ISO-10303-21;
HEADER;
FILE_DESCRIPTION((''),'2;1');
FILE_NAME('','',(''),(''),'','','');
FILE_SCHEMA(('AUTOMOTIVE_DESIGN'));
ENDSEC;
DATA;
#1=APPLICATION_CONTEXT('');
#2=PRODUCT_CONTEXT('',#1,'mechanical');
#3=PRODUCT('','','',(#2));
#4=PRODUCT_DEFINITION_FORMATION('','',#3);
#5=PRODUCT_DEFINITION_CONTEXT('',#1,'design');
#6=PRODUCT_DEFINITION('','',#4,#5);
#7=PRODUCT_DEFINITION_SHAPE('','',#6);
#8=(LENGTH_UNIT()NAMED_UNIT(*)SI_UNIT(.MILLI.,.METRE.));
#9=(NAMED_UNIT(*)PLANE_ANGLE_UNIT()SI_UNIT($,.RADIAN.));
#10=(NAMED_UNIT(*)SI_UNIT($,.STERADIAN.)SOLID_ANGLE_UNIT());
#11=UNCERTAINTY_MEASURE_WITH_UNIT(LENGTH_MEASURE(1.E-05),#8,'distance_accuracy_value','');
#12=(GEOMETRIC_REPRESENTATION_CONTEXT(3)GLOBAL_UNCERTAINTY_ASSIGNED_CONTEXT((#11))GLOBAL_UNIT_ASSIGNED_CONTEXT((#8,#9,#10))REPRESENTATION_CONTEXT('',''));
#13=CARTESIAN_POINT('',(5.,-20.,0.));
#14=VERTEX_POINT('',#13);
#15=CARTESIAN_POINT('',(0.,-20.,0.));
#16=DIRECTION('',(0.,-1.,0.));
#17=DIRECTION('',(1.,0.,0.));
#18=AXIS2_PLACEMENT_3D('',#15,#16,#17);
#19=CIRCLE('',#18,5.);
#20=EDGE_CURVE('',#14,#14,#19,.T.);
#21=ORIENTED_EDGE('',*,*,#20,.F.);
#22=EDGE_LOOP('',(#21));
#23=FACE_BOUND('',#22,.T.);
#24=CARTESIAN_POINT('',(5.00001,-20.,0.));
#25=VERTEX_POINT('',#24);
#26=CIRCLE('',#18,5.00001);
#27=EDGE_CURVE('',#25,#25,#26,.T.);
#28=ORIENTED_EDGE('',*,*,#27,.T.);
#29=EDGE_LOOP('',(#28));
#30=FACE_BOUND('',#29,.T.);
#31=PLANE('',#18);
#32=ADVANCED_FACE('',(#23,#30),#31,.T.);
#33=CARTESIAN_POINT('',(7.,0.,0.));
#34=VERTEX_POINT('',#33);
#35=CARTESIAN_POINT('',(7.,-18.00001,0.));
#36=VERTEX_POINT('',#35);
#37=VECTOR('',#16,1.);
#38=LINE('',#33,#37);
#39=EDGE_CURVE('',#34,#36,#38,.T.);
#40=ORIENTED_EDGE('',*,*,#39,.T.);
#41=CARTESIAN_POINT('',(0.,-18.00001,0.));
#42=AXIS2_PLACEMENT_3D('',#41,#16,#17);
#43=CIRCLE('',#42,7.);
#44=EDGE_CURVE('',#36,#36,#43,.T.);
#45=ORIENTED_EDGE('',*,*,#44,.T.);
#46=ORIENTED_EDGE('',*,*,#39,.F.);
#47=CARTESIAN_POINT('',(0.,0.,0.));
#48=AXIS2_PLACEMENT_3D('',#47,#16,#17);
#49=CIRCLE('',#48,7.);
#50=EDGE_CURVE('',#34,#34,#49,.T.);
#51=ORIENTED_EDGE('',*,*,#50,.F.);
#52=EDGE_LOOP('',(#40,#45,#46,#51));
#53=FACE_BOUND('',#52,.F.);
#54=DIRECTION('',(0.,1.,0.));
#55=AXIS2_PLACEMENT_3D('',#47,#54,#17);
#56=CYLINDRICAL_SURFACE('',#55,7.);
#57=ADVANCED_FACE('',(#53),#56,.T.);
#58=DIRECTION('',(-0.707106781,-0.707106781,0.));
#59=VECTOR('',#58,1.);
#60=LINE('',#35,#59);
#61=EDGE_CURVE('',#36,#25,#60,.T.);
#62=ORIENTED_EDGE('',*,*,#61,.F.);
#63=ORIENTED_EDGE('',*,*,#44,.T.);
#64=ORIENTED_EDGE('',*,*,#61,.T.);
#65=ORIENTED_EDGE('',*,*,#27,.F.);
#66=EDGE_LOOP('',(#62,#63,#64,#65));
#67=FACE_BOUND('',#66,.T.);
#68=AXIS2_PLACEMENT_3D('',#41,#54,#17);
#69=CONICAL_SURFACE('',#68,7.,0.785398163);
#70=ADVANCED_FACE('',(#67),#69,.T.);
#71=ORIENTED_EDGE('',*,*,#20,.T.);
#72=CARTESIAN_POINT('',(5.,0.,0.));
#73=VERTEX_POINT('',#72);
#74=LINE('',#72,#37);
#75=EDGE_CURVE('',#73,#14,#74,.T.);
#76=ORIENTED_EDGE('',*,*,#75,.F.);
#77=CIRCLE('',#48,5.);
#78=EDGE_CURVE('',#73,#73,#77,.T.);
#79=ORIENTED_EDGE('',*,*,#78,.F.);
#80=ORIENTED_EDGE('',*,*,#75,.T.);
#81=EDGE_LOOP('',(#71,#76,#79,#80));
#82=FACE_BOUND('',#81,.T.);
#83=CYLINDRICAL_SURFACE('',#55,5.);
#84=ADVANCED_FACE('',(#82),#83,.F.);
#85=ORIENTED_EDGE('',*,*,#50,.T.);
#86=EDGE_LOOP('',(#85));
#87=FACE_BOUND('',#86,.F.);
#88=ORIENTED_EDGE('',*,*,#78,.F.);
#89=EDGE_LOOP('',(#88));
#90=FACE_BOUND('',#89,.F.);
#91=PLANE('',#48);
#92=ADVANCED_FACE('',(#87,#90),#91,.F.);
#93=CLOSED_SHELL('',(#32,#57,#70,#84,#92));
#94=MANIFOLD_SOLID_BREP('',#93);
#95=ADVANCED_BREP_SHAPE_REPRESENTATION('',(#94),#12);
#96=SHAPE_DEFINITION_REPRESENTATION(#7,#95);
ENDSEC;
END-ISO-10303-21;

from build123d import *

# Parameters (mm, degrees)
F0_R     = 7
F0_R_2   = 5
F1_DEPTH = 20
F2_SIZE  = 1.99999


# Not quite as in the source:
# - a fillet or chamfer is up to 0.001 mm smaller than in the source, because OpenCascade refuses the exact size


with BuildPart() as f1:
    # F0 (on Front) → F1 (new body)
    with BuildSketch(Plane.XZ):
        Circle(F0_R)
        Circle(F0_R_2, mode=Mode.SUBTRACT)
    extrude(amount=F1_DEPTH)

    # F2 (size 2 in the source; OpenCascade refuses exactly that, so slightly less here)
    f2_edges = [f1.edges().sort_by_distance(p)[0] for p in [
        (-7, -20, 0),
    ]]
    chamfer(f2_edges, length=F2_SIZE)


solid = f1.part
